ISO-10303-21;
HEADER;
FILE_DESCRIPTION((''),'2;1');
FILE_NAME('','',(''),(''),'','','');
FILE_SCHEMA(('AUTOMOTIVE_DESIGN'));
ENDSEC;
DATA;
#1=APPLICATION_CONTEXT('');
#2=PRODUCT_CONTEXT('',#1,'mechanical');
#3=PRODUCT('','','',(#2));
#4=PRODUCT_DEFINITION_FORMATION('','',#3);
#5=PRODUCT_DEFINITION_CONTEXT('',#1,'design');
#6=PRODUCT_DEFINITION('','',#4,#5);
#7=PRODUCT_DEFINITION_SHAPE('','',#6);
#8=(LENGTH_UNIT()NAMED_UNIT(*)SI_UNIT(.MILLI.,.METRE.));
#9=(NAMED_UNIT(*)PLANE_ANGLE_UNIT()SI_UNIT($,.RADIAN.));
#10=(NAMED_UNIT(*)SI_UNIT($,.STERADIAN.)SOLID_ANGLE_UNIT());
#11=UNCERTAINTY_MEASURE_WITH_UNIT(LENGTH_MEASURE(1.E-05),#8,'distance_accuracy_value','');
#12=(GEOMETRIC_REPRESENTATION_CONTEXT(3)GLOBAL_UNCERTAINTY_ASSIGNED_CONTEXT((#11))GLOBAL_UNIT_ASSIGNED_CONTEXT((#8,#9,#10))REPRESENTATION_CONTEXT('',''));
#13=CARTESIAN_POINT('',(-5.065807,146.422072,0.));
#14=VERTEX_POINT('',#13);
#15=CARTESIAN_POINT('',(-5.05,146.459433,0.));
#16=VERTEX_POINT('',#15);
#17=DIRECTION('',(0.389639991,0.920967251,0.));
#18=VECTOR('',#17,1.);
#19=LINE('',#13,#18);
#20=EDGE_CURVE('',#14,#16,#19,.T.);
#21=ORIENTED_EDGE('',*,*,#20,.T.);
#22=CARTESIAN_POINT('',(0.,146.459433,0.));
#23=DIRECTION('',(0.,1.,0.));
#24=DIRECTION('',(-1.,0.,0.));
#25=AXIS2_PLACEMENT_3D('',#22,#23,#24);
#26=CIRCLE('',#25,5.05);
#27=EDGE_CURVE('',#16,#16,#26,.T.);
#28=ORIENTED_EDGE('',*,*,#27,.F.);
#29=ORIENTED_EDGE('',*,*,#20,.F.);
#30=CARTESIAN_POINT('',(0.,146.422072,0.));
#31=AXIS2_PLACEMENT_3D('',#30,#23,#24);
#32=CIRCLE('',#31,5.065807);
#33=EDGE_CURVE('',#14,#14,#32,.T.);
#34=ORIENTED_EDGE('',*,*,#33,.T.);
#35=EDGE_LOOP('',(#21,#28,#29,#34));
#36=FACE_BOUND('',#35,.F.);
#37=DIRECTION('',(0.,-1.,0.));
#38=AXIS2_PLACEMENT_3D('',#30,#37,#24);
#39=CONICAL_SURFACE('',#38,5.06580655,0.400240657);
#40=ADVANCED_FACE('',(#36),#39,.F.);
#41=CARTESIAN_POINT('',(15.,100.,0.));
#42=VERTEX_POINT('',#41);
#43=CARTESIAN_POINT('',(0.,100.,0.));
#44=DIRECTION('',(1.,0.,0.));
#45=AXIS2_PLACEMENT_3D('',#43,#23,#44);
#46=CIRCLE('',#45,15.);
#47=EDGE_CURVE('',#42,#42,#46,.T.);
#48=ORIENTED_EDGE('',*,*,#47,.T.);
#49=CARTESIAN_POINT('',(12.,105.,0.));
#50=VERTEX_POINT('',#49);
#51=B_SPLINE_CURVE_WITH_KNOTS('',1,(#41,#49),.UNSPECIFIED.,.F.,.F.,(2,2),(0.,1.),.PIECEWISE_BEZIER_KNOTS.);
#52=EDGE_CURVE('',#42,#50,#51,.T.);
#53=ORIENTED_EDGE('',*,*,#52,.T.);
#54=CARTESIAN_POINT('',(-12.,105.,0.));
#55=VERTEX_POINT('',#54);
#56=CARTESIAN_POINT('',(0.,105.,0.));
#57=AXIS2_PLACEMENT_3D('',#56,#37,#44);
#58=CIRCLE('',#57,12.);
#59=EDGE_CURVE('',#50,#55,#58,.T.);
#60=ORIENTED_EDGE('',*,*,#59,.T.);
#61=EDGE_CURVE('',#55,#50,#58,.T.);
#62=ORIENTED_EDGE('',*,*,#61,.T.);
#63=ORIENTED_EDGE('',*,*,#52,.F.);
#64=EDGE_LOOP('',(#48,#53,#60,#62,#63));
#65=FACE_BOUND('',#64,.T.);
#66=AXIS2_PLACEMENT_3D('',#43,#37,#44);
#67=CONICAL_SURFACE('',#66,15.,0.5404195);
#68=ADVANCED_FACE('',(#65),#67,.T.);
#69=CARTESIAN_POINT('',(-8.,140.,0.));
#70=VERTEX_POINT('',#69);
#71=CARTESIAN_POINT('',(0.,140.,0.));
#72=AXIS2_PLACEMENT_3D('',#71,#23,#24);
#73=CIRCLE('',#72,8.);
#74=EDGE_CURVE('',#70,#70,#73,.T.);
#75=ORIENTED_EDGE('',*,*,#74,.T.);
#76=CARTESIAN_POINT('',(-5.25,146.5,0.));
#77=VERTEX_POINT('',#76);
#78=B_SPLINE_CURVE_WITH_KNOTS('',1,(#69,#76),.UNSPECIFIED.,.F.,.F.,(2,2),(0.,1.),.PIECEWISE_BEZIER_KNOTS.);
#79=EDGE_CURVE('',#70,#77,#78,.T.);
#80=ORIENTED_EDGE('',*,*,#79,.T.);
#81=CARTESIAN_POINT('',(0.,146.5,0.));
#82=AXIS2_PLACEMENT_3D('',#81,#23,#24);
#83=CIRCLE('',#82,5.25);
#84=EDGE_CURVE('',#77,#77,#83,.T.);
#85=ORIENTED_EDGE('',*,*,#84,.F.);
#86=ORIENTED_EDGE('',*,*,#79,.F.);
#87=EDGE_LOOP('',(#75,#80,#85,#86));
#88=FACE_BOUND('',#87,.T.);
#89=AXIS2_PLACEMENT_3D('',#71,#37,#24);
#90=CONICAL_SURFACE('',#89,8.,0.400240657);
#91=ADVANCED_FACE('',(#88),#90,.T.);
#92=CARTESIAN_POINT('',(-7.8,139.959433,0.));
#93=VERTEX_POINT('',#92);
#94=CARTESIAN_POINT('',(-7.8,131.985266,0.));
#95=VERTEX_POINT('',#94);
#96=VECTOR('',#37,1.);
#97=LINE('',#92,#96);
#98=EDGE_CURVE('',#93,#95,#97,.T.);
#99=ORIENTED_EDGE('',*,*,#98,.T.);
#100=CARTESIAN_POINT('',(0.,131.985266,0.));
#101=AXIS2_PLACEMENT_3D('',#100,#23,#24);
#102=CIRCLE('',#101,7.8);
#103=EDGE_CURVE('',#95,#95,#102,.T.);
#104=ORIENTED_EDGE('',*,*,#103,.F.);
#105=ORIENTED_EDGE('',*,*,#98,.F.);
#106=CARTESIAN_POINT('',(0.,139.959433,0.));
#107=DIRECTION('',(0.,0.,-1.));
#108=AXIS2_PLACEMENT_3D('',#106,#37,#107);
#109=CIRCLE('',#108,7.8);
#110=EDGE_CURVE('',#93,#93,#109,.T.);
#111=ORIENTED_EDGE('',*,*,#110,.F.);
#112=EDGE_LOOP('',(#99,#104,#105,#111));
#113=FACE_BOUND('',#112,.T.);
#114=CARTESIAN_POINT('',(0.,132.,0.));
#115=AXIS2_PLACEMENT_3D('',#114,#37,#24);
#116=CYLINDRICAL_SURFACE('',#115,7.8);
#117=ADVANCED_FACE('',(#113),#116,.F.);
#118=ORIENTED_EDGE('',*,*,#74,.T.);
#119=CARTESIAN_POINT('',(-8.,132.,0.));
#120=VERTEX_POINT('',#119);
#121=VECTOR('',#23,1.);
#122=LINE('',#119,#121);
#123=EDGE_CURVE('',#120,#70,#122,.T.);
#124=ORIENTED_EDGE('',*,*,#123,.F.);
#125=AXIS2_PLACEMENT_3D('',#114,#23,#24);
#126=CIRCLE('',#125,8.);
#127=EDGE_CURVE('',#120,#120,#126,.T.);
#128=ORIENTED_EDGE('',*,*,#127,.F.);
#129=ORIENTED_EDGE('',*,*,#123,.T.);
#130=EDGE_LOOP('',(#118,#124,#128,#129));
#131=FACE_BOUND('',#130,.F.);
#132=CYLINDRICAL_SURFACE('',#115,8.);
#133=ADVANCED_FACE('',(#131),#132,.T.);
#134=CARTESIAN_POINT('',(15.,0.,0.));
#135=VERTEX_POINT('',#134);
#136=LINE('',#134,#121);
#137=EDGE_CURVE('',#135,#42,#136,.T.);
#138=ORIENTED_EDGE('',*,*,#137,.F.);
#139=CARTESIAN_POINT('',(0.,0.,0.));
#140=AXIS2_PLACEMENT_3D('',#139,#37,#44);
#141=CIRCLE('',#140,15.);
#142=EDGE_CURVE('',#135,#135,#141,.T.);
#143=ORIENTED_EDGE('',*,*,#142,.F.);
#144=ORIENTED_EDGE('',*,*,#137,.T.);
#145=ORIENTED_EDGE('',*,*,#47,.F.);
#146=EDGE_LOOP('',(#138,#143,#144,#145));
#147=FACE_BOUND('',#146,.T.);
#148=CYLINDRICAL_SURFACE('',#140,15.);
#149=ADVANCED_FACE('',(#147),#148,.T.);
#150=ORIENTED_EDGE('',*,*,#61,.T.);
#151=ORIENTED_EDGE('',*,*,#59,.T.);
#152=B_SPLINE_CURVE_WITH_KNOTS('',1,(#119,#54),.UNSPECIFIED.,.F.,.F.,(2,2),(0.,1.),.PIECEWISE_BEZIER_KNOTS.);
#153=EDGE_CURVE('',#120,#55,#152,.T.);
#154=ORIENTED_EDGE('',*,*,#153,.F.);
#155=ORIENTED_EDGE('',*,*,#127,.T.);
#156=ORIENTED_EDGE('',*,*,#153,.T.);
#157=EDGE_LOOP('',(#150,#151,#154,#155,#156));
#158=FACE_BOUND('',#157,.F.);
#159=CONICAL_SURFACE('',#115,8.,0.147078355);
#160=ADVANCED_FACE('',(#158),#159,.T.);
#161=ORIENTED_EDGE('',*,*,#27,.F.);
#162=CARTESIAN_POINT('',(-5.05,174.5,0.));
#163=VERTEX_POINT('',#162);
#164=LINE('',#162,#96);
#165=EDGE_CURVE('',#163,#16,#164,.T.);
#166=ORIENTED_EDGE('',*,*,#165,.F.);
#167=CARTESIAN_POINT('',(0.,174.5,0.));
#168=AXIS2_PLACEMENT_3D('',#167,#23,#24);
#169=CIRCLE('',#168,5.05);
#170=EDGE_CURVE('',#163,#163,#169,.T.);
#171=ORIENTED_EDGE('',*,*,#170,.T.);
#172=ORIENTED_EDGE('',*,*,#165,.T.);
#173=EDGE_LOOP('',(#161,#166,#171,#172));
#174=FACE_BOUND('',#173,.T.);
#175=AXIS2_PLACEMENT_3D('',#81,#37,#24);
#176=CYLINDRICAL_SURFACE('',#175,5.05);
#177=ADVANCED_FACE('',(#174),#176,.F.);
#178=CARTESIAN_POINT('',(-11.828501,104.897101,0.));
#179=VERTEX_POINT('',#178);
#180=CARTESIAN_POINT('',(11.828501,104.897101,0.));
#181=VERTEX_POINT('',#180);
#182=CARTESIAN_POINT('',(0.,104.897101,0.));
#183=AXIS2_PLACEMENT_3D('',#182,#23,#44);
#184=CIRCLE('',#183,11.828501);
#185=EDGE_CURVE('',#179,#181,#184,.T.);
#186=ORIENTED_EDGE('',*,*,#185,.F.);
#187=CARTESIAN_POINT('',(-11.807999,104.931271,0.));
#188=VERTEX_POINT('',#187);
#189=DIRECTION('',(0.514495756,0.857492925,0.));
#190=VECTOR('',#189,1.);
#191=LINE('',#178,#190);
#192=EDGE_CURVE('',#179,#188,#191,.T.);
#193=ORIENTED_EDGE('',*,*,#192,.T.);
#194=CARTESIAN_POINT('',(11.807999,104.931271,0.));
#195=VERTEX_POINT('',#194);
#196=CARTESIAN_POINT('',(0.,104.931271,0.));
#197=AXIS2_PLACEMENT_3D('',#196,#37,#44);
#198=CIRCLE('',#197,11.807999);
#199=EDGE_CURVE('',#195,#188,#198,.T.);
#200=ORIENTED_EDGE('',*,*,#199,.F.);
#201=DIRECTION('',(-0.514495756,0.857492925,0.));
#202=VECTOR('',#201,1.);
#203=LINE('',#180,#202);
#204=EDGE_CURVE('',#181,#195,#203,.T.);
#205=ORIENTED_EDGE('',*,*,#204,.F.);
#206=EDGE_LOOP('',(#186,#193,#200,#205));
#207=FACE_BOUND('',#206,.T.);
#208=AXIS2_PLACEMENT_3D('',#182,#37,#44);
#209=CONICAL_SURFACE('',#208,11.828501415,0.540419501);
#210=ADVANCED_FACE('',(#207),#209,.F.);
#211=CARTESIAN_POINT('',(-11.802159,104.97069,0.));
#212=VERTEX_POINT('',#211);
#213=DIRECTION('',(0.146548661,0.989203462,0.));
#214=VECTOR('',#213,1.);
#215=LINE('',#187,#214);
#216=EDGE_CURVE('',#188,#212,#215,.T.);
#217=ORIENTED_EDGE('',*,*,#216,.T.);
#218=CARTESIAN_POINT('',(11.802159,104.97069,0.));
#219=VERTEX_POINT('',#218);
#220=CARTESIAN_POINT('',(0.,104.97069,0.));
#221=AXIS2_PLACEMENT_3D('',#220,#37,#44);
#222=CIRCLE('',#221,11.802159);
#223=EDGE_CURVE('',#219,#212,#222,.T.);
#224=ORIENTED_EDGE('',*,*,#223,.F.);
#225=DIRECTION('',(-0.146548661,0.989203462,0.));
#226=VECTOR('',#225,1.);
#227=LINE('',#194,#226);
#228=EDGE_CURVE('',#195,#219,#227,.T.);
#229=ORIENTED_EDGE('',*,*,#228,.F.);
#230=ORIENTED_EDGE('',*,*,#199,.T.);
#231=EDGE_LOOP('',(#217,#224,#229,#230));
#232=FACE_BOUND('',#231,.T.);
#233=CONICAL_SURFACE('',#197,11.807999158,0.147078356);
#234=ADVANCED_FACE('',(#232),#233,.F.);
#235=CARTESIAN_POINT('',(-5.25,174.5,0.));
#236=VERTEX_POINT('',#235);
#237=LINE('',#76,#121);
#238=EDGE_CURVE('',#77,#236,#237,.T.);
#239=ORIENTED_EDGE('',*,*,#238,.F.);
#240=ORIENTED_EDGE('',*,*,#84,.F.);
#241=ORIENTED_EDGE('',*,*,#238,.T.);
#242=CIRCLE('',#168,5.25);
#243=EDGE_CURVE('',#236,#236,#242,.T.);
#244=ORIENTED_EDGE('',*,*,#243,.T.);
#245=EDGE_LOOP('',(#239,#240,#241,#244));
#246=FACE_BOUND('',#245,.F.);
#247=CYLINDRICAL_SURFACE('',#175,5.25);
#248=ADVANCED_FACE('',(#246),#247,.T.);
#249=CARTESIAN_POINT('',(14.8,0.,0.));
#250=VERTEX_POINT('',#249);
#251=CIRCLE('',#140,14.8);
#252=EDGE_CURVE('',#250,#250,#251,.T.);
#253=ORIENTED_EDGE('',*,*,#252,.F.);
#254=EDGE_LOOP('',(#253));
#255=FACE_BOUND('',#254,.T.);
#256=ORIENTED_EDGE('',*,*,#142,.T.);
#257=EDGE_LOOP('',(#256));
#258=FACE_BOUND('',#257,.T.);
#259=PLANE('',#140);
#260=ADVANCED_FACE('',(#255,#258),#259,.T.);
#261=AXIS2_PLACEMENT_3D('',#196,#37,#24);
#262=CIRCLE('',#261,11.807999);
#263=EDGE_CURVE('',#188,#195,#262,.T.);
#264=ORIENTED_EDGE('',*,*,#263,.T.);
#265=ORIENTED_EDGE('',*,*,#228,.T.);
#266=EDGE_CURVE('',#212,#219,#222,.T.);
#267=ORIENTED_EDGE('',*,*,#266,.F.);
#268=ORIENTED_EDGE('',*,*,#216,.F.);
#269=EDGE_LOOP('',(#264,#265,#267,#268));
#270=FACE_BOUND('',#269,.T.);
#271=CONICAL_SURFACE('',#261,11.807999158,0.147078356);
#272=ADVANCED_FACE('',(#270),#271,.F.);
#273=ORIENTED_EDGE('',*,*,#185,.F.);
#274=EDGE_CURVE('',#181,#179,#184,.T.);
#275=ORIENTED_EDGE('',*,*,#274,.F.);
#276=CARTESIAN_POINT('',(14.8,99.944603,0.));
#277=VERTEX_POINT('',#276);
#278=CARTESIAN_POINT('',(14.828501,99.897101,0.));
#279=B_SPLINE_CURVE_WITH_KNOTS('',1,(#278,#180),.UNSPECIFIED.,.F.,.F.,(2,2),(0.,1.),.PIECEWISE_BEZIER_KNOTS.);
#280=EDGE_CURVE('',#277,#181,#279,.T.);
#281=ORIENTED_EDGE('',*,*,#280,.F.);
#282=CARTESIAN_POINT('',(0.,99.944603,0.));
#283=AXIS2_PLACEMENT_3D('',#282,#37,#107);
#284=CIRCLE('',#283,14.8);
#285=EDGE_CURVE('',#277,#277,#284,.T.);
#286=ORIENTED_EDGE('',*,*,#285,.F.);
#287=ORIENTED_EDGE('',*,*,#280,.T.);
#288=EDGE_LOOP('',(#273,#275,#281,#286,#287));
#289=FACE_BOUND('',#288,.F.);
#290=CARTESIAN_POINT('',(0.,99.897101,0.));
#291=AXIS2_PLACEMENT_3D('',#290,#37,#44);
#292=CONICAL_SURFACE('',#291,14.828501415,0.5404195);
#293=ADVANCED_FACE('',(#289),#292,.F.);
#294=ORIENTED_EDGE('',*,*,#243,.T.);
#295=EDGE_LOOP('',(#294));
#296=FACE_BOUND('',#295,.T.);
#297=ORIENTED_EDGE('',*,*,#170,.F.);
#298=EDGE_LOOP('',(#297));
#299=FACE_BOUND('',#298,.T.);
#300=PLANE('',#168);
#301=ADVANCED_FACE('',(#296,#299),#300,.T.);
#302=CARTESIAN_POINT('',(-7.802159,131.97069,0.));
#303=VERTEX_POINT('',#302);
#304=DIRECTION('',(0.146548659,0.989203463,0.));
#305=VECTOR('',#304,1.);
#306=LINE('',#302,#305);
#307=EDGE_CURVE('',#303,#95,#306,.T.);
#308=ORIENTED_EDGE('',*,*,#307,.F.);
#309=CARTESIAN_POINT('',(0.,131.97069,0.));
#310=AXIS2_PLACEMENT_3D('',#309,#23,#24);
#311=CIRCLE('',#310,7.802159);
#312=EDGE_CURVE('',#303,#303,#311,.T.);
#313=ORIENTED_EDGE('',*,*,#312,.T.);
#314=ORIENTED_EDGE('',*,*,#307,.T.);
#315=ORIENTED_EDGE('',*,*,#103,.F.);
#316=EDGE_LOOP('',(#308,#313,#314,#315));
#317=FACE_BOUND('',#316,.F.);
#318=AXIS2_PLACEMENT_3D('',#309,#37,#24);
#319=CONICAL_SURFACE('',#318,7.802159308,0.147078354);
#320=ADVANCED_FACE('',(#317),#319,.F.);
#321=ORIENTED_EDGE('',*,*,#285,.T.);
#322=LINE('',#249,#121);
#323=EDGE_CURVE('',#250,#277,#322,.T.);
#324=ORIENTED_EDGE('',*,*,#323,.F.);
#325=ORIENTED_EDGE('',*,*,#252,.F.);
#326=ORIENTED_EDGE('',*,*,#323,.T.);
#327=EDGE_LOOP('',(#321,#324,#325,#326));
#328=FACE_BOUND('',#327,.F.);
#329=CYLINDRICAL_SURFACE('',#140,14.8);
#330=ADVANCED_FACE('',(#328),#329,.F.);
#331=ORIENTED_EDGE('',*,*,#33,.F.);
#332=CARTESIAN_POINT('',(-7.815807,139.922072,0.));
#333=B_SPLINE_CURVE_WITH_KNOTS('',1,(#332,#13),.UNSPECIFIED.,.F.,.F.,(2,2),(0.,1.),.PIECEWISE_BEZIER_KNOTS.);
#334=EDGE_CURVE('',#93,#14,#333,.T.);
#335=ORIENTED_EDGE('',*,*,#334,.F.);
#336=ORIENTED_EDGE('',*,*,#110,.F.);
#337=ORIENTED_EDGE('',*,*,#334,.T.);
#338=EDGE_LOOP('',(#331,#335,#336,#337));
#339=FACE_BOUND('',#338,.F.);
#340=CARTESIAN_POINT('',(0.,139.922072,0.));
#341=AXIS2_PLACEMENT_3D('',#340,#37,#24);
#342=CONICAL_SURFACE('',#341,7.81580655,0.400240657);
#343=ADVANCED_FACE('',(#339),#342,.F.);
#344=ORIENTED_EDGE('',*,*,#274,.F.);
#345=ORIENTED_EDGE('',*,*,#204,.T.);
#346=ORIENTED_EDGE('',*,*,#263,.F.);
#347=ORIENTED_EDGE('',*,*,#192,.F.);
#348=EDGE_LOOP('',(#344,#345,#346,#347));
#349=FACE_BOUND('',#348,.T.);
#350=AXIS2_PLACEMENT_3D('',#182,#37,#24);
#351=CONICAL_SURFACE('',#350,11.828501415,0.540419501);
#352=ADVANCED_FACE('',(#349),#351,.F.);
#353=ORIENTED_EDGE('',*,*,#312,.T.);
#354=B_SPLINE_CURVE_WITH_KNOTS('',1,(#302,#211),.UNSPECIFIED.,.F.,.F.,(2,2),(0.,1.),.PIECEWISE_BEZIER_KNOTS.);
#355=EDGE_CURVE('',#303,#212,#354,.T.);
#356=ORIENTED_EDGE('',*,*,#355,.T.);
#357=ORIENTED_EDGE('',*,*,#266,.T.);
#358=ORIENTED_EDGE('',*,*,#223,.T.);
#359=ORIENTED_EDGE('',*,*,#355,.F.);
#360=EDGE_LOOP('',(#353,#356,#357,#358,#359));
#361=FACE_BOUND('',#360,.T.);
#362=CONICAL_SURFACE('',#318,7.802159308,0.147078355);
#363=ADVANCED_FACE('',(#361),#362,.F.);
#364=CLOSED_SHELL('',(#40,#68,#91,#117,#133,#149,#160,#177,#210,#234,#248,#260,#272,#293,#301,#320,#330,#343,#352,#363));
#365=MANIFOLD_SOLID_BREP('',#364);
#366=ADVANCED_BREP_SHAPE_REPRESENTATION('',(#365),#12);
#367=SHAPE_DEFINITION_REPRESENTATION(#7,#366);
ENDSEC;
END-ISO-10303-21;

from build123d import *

# Parameters (mm, degrees)
F0_R         = 15
F1_DEPTH     = 100
F1_FACE_R    = 15
F3_R         = 12
F6_R         = 8
F4_FACE_R    = 12
F8_DEPTH     = 8
F8_FACE_R    = 8
F10_R        = 5.25
F12_DEPTH    = 28
F13_T        = 0.2
F13_T4_ANGLE = 180.000000001
F13_T6_ANGLE = 180.000000001


# Not quite as in the source:
# - a shell that OpenCascade refuses in one call is made with other operations: the cavity is built on its own and cut out


with BuildPart() as f1:
    # F0 (on Front) → F1 (new body)
    with BuildSketch(Plane.XZ):
        Circle(F0_R)
    extrude(amount=-F1_DEPTH)

    # F1_face (on face) → F4 section 0
    with BuildSketch(Plane(origin=(0, 100, 0), x_dir=(1, 0, 0), z_dir=(0, 1, 0))):
        Circle(F1_FACE_R)
    # F3 (on offset) → F4 section 1
    with BuildSketch(Plane(origin=(0, 105, 0), x_dir=(-1, 0, 0), z_dir=(0, 1, 0))):
        Circle(F3_R)
    loft()

    # F6 (on offset) → F7 section 0
    with BuildSketch(Plane(origin=(0, 132, 0), x_dir=(-1, 0, 0), z_dir=(0, 1, 0))):
        Circle(F6_R)
    # F4_face (on face) → F7 section 1
    with BuildSketch(Plane(origin=(0, 105, 0), x_dir=(-1, 0, 0), z_dir=(0, 1, 0))):
        Circle(F4_FACE_R)
    loft()

    # F8 (add): a face of the model
    f8_faces = [f1.faces().sort_by_distance(p)[0] for p in [
        (0, 132, 0),
    ]]
    extrude(f8_faces, amount=F8_DEPTH)

    # F8_face (on face) → F11 section 0
    with BuildSketch(Plane(origin=(0, 140, 0), x_dir=(-1, 0, 0), z_dir=(0, 1, 0))):
        Circle(F8_FACE_R)
    # F10 (on offset) → F11 section 1
    with BuildSketch(Plane(origin=(0, 146.5, 0), x_dir=(-1, 0, 0), z_dir=(0, 1, 0))):
        Circle(F10_R)
    loft()

    # F12 (add): a face of the model
    f12_faces = [f1.faces().sort_by_distance(p)[0] for p in [
        (0, 146.5, 0),
    ]]
    extrude(f12_faces, amount=F12_DEPTH)

    # F13: shell of thickness 0.2, made by hand


with BuildPart() as f13_core1:
    # F13_t2: copy of F1
    add(f1.part)

    # the walls: a layer under each face that stays
    f13_faces = [f13_core1.faces().sort_by_distance(p)[0] for p in [
        (-15, 50, 0),
        (-13.5, 102.5, 0),
        (10, 118.5, 0),
        (8, 136, 0),
        (6.625, 143.25, 0),
        (5.25, 160.5, 0),
    ]]
    thicken(f13_faces, amount=-F13_T, mode=Mode.SUBTRACT)

    # F13_s3 → F13_t4 (revolve, cut)
    with BuildSketch(Plane.XY):
        Polygon((-12.0036933928, 105.0013220888), (-11.8285014149, 104.8971008489), (-11.807999158, 104.931271277), (-11.8021593075, 104.9706902678), align=None)
    revolve(axis=Axis((0, 105, 0), (0, -1, 0)), revolution_arc=F13_T4_ANGLE, mode=Mode.SUBTRACT)

    # F13_s5 → F13_t6 (revolve, cut)
    with BuildSketch(Plane.XY):
        Polygon((12.0036933928, 105.0013220888), (11.8285014149, 104.8971008489), (11.807999158, 104.931271277), (11.8021593075, 104.9706902678), align=None)
    revolve(axis=Axis((0, 105, 0), (0, -1, 0)), revolution_arc=F13_T6_ANGLE, mode=Mode.SUBTRACT)

    # F13_s7 → F13_t8 (revolve, cut)
    with BuildSketch(Plane.XY):
        Polygon((-8.0039784069, 132.0002930973), (-7.8021593075, 131.9706902678), (-7.8, 131.9852655936), (-7.8, 132), align=None)
    revolve(axis=Axis((0, 132, 0), (0, 1, 0)), mode=Mode.SUBTRACT)

    # F13_s9 → F13_t10 (revolve, cut)
    with BuildSketch(Plane.XY):
        Polygon((-5.2538419345, 146.50077928), (-5.0658065498, 146.4220720018), (-5.05, 146.4594329377), (-5.05, 146.5), align=None)
    revolve(axis=Axis((0, 146.5, 0), (0, 1, 0)), mode=Mode.SUBTRACT)


with BuildPart() as f1_1:
    add(f1.part)

    # what is left inside the walls is the cavity
    f13_cavity = [f13_core1.part.solids().sort_by_distance(p)[0] for p in [
        (-14.798, 66.629735, 0),
    ]]
    add(f13_cavity, mode=Mode.SUBTRACT)


solid = f1_1.part
